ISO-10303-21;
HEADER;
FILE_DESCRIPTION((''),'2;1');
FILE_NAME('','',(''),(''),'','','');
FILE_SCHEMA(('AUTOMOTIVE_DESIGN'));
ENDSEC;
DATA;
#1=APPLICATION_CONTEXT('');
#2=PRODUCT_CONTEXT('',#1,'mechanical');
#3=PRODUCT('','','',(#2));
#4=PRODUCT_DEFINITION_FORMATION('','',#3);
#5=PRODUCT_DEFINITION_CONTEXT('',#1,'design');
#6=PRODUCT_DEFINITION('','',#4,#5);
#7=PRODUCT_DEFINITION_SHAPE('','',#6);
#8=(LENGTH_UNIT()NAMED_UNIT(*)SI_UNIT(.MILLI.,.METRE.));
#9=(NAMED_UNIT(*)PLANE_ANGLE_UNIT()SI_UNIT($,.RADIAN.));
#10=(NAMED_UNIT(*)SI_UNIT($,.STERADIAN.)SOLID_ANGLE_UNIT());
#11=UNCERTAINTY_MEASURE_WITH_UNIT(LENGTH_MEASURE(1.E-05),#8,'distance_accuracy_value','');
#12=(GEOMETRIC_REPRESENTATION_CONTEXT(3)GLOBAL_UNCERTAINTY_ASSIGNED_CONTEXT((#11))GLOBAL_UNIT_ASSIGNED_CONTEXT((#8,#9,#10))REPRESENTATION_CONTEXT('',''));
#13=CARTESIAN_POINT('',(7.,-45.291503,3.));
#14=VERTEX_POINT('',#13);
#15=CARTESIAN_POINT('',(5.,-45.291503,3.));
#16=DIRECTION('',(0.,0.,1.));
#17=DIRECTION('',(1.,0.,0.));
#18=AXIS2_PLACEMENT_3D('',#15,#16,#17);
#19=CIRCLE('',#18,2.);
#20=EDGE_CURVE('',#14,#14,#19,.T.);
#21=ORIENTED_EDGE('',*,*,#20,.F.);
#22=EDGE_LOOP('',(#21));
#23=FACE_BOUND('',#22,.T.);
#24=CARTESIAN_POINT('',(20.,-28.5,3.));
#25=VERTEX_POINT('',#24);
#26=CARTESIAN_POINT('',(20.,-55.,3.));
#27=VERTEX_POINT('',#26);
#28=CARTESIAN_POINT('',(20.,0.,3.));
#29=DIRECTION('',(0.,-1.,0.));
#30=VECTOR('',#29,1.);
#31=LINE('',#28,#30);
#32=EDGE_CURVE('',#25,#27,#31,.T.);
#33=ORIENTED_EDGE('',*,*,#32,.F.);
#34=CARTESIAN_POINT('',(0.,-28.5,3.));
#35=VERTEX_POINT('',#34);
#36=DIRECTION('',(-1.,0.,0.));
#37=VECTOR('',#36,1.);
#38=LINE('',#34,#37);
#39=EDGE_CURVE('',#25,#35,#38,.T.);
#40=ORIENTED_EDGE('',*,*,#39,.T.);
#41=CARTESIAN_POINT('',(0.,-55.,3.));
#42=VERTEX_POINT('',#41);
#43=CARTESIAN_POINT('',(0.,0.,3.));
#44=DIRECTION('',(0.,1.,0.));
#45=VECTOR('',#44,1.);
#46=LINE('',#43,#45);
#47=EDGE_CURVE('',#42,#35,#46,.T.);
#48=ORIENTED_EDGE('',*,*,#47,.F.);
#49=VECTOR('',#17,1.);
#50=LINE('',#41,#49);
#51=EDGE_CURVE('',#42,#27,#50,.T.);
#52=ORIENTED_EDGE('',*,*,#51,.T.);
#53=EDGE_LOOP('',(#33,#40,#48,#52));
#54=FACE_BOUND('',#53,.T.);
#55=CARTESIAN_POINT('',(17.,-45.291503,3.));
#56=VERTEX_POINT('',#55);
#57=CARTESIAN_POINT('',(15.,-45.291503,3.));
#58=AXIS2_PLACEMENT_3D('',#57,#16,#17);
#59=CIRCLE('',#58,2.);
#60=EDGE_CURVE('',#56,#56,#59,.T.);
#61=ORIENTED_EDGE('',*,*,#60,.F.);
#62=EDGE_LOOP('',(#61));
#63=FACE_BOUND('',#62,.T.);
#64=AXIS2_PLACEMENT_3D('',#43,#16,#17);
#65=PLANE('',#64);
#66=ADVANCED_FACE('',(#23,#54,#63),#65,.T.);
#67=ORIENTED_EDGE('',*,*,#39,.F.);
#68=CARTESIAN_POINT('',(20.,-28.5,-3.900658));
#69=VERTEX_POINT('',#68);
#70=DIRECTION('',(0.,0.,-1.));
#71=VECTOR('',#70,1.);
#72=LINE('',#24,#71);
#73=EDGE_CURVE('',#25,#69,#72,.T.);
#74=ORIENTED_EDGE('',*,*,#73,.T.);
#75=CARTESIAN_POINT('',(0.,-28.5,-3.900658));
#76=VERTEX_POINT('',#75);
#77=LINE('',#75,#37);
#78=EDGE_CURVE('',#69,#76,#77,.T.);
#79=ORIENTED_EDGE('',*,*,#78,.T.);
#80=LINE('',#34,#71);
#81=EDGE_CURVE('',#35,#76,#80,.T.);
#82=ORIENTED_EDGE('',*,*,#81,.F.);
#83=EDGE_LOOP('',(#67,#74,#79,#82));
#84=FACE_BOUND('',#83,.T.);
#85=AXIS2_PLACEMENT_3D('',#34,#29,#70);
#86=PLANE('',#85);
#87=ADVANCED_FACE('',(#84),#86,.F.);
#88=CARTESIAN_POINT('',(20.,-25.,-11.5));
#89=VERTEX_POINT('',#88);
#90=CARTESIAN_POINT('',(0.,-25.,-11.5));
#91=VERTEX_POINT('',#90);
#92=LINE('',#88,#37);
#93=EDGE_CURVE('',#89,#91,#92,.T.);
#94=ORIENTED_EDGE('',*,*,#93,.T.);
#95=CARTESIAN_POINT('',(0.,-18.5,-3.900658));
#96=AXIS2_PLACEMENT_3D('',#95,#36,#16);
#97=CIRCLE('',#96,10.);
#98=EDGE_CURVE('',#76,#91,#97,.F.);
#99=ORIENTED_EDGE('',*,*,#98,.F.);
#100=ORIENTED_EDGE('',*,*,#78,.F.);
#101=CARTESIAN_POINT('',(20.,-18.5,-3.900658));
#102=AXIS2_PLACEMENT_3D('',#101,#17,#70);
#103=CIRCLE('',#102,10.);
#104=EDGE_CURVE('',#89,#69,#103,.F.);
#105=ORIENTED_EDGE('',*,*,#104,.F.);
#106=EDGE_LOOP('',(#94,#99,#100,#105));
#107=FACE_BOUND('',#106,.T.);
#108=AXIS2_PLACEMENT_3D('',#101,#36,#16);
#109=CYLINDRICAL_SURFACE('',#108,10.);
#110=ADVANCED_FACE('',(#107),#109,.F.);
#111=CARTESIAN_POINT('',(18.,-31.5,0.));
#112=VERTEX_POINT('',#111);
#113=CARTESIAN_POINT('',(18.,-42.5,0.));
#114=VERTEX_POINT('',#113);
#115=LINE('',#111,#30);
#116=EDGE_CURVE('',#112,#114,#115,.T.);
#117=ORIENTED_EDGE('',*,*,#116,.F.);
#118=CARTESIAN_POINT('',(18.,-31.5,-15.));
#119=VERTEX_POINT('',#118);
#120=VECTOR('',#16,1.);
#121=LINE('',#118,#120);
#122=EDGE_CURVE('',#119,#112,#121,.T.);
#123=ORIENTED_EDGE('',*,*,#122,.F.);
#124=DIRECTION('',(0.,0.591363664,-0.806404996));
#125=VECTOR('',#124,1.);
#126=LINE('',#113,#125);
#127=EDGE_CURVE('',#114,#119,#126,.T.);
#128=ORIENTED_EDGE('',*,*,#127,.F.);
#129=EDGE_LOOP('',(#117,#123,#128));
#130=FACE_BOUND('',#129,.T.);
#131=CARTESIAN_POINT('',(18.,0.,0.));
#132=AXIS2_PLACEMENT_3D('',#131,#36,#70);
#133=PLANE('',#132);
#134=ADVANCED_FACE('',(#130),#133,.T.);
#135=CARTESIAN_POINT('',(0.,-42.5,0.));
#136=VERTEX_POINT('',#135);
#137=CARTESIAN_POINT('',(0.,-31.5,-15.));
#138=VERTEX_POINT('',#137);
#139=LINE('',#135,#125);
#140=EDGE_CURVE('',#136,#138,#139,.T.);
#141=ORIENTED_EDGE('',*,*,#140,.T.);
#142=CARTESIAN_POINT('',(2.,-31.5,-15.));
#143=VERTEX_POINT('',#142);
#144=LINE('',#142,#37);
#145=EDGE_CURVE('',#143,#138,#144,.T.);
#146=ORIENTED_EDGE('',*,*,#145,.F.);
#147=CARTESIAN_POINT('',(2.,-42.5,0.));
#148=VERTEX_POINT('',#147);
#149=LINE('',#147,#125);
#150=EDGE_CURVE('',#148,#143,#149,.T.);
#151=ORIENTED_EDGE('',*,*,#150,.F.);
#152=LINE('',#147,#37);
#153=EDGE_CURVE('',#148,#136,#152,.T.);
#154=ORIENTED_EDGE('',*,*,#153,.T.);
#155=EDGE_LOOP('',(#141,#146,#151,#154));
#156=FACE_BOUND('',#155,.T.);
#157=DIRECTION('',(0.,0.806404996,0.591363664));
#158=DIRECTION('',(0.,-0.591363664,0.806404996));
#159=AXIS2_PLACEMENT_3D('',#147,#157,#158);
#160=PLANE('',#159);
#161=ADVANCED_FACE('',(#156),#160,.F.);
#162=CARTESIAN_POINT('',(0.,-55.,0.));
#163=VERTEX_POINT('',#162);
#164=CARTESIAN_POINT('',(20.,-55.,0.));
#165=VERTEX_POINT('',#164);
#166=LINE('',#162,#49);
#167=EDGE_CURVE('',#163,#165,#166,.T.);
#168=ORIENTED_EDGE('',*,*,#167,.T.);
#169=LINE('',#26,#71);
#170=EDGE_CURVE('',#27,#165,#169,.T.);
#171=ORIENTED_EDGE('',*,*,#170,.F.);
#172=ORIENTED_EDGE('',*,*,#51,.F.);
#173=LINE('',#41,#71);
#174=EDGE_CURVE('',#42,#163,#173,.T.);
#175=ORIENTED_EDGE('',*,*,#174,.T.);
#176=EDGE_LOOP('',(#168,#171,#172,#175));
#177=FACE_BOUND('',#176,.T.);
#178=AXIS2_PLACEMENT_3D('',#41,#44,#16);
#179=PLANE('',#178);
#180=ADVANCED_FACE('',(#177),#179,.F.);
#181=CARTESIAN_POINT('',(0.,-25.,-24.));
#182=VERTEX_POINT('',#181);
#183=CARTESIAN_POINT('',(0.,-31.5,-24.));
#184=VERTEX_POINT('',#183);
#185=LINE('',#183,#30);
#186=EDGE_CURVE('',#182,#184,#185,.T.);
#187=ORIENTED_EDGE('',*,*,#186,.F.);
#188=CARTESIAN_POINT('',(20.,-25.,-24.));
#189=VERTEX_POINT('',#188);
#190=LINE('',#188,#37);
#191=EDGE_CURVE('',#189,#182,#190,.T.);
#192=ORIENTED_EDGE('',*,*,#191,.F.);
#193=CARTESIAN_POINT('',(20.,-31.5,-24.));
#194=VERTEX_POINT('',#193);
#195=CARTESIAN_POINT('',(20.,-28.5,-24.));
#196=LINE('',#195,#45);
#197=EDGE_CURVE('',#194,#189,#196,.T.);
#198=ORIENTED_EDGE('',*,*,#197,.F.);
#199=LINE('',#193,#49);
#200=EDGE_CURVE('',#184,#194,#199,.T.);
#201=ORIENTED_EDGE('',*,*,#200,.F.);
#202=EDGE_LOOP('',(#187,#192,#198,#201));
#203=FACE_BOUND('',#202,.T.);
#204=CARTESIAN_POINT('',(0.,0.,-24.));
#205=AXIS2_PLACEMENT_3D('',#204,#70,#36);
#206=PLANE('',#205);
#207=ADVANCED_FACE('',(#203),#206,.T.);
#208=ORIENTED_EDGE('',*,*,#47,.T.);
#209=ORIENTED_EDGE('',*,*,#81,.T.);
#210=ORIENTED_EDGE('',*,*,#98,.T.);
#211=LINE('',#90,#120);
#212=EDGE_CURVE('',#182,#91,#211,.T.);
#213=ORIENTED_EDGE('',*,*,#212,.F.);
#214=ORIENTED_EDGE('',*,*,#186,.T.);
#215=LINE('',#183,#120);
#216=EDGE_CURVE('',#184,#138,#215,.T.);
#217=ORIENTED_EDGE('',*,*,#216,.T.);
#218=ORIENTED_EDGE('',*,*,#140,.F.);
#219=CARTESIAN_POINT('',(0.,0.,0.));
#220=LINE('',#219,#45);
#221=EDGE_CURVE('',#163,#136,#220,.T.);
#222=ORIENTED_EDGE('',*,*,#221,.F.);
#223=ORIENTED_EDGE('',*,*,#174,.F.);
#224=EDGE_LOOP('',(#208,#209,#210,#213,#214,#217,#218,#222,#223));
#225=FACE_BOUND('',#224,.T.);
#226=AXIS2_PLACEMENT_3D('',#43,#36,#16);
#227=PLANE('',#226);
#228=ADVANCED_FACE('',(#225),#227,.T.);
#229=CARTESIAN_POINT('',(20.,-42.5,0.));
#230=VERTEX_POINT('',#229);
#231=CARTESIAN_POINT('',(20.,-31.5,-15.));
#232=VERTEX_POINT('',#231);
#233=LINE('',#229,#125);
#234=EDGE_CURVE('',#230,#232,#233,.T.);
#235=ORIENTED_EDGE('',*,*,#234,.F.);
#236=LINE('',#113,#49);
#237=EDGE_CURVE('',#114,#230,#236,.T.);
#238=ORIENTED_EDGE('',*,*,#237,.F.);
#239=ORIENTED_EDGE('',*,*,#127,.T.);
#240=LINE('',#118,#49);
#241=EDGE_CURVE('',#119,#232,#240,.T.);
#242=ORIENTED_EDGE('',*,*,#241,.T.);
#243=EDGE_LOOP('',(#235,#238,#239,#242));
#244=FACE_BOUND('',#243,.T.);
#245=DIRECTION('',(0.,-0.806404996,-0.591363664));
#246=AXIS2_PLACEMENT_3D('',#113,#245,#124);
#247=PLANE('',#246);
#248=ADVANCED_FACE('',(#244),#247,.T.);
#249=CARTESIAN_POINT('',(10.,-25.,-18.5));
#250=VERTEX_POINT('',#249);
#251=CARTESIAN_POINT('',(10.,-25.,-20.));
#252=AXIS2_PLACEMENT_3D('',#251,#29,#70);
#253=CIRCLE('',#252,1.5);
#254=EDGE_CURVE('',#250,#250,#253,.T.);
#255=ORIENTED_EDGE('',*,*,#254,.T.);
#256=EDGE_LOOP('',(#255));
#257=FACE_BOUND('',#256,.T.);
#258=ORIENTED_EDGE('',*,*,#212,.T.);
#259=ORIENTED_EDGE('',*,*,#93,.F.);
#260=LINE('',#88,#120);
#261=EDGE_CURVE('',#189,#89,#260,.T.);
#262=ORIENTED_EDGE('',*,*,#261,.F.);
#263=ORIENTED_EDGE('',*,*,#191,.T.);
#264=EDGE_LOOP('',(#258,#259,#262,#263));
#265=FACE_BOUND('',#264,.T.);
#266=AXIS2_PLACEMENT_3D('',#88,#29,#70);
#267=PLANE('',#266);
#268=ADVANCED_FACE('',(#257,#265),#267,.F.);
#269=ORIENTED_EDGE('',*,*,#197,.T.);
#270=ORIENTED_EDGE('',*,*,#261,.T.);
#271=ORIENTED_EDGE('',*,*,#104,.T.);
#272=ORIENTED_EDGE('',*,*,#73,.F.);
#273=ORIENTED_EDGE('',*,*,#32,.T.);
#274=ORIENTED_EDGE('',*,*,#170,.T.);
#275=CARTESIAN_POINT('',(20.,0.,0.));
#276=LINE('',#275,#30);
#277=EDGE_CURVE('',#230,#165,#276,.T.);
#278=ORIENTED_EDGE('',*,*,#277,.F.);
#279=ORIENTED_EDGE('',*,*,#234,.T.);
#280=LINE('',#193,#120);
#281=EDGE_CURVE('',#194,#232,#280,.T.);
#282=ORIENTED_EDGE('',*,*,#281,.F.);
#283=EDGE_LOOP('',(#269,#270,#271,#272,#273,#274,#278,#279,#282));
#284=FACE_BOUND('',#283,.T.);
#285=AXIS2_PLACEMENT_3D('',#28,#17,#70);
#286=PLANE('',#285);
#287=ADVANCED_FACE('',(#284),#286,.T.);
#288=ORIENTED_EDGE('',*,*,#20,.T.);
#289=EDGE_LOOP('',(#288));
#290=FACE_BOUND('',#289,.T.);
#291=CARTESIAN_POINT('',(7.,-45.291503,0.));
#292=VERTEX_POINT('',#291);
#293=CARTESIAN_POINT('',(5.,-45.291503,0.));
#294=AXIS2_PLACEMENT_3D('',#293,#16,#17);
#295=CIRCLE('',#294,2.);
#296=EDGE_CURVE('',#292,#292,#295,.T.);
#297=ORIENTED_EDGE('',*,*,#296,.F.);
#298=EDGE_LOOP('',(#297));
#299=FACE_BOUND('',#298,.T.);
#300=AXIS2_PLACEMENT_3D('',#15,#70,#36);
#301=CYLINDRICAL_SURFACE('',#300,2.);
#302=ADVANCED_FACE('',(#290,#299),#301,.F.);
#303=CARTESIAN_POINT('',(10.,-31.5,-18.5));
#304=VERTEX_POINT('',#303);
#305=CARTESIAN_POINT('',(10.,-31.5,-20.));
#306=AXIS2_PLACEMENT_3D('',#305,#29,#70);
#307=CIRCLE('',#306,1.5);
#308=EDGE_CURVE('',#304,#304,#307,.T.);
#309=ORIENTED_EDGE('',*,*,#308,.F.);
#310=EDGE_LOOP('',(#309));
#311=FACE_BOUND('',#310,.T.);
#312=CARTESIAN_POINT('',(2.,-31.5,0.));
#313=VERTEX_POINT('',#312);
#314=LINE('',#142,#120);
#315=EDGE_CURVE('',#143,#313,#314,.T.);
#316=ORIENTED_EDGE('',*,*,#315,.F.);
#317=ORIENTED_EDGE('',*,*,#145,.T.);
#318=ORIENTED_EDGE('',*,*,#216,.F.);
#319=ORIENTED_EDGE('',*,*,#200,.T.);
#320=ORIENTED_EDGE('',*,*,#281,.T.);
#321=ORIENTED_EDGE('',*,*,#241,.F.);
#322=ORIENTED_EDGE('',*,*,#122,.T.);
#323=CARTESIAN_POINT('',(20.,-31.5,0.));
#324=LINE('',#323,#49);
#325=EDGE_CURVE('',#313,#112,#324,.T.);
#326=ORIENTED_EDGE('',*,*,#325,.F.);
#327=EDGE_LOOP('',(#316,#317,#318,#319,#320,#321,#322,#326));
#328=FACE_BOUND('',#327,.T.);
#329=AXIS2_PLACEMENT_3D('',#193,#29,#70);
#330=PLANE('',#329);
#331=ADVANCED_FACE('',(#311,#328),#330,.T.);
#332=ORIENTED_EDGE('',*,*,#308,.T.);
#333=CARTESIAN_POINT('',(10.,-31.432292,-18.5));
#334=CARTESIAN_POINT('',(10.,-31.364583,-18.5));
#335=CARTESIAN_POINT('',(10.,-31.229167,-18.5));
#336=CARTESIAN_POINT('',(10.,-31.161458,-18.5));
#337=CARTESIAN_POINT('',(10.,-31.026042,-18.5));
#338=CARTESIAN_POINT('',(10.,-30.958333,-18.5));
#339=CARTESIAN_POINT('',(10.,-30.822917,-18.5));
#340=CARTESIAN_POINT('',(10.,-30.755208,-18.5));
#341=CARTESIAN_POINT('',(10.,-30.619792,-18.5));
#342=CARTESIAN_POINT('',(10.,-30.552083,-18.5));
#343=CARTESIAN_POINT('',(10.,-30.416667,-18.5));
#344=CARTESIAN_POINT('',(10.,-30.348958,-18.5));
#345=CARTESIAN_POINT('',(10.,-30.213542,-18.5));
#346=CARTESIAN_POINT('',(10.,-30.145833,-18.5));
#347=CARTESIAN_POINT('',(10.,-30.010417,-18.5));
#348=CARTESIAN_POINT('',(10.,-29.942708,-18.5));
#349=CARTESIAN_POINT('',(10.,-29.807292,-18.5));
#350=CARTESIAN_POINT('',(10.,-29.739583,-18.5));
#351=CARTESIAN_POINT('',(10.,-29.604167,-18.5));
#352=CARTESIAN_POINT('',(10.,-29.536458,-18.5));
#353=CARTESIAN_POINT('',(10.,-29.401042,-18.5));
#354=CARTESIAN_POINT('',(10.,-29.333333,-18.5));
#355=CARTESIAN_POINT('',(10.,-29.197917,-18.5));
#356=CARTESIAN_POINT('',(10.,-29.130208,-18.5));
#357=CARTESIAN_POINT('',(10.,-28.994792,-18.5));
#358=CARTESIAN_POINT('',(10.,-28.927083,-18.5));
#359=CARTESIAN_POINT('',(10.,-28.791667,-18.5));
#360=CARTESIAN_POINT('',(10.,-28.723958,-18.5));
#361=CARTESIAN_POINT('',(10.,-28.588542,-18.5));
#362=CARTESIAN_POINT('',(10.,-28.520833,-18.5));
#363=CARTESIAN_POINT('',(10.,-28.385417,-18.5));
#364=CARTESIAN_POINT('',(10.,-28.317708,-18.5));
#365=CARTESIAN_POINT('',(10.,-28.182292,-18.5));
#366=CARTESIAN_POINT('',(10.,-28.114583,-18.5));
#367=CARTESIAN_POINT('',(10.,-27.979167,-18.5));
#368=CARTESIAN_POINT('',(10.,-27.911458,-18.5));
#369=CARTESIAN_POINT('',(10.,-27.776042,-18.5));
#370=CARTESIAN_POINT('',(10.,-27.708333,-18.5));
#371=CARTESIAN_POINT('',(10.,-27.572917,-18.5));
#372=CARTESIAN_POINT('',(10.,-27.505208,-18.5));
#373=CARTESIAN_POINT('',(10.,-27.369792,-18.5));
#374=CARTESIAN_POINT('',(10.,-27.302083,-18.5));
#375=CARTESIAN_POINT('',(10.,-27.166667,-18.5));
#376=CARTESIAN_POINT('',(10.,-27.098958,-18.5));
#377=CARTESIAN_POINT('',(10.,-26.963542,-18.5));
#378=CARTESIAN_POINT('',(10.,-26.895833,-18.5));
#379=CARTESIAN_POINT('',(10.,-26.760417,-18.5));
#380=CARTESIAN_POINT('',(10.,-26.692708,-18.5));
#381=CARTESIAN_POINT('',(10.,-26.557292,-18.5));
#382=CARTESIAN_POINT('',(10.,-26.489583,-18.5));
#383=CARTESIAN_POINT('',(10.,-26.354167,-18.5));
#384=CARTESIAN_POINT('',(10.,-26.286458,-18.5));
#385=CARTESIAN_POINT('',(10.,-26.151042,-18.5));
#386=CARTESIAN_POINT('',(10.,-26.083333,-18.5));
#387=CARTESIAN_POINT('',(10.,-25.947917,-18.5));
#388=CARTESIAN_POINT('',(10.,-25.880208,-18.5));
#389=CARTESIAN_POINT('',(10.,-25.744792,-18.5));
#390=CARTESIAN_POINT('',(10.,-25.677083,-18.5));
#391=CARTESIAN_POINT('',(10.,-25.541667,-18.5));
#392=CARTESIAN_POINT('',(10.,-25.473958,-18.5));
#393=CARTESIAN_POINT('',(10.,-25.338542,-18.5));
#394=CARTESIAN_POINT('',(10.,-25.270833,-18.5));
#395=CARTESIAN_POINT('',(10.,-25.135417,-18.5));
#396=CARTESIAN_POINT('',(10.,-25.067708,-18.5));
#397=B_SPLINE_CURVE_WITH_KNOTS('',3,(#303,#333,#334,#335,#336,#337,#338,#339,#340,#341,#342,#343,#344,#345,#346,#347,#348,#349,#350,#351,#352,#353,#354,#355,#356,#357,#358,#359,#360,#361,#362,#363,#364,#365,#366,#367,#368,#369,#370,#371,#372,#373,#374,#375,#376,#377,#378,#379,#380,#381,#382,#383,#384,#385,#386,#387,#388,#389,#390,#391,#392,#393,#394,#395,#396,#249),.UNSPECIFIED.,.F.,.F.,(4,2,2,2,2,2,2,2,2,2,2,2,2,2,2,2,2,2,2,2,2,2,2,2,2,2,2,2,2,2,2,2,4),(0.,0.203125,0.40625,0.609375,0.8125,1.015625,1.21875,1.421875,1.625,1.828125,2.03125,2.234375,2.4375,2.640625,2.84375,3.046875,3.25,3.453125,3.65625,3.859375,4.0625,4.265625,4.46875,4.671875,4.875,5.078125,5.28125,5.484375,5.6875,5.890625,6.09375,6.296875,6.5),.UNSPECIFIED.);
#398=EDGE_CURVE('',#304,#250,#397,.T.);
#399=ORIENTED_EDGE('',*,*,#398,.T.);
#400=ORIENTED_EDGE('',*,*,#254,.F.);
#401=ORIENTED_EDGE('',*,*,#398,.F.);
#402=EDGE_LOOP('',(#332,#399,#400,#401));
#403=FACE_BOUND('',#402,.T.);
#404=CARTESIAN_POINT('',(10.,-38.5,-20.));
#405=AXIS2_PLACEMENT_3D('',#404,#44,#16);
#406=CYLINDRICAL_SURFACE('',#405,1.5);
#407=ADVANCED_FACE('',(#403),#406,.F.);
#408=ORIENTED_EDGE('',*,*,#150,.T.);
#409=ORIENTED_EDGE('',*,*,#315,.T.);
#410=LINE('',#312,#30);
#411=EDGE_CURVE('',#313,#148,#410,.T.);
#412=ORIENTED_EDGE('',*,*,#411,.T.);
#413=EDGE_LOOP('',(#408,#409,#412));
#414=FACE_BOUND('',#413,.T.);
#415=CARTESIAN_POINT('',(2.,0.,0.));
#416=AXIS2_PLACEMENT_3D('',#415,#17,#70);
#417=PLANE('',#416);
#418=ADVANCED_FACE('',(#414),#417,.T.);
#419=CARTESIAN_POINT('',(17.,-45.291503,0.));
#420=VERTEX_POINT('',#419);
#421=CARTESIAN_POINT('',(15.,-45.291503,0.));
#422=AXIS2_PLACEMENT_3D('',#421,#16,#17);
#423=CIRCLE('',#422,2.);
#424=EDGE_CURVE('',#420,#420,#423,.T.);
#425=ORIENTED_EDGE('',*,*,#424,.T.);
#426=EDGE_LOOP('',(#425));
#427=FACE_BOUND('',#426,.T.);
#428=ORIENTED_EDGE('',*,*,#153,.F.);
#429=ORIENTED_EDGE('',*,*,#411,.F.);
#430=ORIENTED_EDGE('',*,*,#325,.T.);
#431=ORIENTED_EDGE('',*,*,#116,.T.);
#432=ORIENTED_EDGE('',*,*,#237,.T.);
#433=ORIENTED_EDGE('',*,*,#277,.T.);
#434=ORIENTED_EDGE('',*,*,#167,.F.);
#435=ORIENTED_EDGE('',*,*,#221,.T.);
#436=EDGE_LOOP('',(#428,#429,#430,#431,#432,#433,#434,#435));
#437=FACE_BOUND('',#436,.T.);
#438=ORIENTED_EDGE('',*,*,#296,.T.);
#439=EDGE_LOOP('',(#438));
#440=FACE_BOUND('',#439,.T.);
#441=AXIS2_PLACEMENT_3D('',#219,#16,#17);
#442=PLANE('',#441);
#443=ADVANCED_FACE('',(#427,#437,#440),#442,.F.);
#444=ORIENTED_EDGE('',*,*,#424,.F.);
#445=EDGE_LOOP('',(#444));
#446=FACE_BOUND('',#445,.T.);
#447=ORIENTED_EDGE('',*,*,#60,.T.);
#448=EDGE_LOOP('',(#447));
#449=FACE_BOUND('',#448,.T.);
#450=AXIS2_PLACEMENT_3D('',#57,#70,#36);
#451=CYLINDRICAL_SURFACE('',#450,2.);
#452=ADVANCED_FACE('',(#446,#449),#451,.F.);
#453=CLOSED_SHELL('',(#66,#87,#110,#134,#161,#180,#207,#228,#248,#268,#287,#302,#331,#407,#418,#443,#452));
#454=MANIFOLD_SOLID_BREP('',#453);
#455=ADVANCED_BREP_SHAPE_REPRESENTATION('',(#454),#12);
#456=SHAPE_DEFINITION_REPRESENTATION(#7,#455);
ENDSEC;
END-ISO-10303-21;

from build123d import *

# Parameters (mm, degrees)
SKETCH_1_W          = 20
SKETCH_1_H          = 26.5
SKETCH_1_R          = 2
EXTRUDE_1_DEPTH     = 3
SKETCH_2_W          = 20
SKETCH_2_H          = 3
EXTRUDE_2_DEPTH     = 24
EXTRUDE_3_DEPTH     = 2
SKETCH_5_W          = 12.5
SKETCH_5_H          = 3.5
EXTRUDE_4_DEPTH     = 20
SKETCH_4_R          = 1.5
CUT_EXTRUDE_1_DEPTH = 10
FILLET_1_R          = 10


with BuildPart() as part:
    # 草图1 → 凸台-拉伸1 (new body)
    with BuildSketch(Plane.XY):
        with Locations((10, -41.75)):
            Rectangle(SKETCH_1_W, SKETCH_1_H)
        with Locations((5, -45.291502622)):
            Circle(SKETCH_1_R, mode=Mode.SUBTRACT)
        with Locations((15, -45.291502622)):
            Circle(SKETCH_1_R, mode=Mode.SUBTRACT)
    extrude(amount=EXTRUDE_1_DEPTH)

    # 草图2 → 凸台-拉伸2 (add)
    with BuildSketch(Plane.XY):
        with Locations((10, -30)):
            Rectangle(SKETCH_2_W, SKETCH_2_H)
    extrude(amount=-EXTRUDE_2_DEPTH)

    # 草图3 → 凸台-拉伸3 (add)
    with BuildSketch(Plane(origin=(0, 0, 0), x_dir=(0, 0, -1), z_dir=(1, 0, 0))):
        Polygon((0, -31.5), (0, -42.5), (15, -31.5), align=None)
    extrude_3 = extrude(amount=EXTRUDE_3_DEPTH)

    # 镜向1: 凸台-拉伸3 across plane
    add(extrude_3.mirror(Plane(origin=(10, 0, 0), x_dir=(0, 0, 1), z_dir=(1, 0, 0))))

    # 草图5 → 凸台-拉伸4 (add)
    with BuildSketch(Plane(origin=(0, 0, 0), x_dir=(0, 0, -1), z_dir=(1, 0, 0))):
        with Locations((17.75, -26.75)):
            Rectangle(SKETCH_5_W, SKETCH_5_H)
    extrude(amount=EXTRUDE_4_DEPTH)

    # 草图4 → 切除-拉伸1 (cut, symmetric)
    with BuildSketch(Plane(origin=(0, -28.5, 0), x_dir=(1, 0, 0), z_dir=(0, 1, 0))):
        with Locations(Location((10, 20, 0), (0, 0, 270))):
            Circle(SKETCH_4_R)
    extrude(amount=CUT_EXTRUDE_1_DEPTH, both=True, mode=Mode.SUBTRACT)

    # 圆角1
    # the kernel refuses this fillet: 10 mm, written as the material it adds along each edge
    with BuildSketch(Plane(origin=(0, -28.5, -11.5), x_dir=(0, 0, 1), z_dir=(1, 0, 0))) as fillet_1_piece_1:
        with BuildLine():
            CenterArc((7.599342077, -10), FILLET_1_R, 90, 49.458398126)
            Line((0, -3.5), (-0.151986842, -3.37))
            ThreePointArc((-0.151986842, -3.37), (-0.2, -1.75), (-0.2, 0))
            Line((-0.2, 0), (0, 0.2))
            Line((0, 0.2), (7.599342077, 0.2))
            Line((7.599342077, 0.2), (7.599342077, 0))
        make_face()
    extrude(amount=20)


solid = part.part
